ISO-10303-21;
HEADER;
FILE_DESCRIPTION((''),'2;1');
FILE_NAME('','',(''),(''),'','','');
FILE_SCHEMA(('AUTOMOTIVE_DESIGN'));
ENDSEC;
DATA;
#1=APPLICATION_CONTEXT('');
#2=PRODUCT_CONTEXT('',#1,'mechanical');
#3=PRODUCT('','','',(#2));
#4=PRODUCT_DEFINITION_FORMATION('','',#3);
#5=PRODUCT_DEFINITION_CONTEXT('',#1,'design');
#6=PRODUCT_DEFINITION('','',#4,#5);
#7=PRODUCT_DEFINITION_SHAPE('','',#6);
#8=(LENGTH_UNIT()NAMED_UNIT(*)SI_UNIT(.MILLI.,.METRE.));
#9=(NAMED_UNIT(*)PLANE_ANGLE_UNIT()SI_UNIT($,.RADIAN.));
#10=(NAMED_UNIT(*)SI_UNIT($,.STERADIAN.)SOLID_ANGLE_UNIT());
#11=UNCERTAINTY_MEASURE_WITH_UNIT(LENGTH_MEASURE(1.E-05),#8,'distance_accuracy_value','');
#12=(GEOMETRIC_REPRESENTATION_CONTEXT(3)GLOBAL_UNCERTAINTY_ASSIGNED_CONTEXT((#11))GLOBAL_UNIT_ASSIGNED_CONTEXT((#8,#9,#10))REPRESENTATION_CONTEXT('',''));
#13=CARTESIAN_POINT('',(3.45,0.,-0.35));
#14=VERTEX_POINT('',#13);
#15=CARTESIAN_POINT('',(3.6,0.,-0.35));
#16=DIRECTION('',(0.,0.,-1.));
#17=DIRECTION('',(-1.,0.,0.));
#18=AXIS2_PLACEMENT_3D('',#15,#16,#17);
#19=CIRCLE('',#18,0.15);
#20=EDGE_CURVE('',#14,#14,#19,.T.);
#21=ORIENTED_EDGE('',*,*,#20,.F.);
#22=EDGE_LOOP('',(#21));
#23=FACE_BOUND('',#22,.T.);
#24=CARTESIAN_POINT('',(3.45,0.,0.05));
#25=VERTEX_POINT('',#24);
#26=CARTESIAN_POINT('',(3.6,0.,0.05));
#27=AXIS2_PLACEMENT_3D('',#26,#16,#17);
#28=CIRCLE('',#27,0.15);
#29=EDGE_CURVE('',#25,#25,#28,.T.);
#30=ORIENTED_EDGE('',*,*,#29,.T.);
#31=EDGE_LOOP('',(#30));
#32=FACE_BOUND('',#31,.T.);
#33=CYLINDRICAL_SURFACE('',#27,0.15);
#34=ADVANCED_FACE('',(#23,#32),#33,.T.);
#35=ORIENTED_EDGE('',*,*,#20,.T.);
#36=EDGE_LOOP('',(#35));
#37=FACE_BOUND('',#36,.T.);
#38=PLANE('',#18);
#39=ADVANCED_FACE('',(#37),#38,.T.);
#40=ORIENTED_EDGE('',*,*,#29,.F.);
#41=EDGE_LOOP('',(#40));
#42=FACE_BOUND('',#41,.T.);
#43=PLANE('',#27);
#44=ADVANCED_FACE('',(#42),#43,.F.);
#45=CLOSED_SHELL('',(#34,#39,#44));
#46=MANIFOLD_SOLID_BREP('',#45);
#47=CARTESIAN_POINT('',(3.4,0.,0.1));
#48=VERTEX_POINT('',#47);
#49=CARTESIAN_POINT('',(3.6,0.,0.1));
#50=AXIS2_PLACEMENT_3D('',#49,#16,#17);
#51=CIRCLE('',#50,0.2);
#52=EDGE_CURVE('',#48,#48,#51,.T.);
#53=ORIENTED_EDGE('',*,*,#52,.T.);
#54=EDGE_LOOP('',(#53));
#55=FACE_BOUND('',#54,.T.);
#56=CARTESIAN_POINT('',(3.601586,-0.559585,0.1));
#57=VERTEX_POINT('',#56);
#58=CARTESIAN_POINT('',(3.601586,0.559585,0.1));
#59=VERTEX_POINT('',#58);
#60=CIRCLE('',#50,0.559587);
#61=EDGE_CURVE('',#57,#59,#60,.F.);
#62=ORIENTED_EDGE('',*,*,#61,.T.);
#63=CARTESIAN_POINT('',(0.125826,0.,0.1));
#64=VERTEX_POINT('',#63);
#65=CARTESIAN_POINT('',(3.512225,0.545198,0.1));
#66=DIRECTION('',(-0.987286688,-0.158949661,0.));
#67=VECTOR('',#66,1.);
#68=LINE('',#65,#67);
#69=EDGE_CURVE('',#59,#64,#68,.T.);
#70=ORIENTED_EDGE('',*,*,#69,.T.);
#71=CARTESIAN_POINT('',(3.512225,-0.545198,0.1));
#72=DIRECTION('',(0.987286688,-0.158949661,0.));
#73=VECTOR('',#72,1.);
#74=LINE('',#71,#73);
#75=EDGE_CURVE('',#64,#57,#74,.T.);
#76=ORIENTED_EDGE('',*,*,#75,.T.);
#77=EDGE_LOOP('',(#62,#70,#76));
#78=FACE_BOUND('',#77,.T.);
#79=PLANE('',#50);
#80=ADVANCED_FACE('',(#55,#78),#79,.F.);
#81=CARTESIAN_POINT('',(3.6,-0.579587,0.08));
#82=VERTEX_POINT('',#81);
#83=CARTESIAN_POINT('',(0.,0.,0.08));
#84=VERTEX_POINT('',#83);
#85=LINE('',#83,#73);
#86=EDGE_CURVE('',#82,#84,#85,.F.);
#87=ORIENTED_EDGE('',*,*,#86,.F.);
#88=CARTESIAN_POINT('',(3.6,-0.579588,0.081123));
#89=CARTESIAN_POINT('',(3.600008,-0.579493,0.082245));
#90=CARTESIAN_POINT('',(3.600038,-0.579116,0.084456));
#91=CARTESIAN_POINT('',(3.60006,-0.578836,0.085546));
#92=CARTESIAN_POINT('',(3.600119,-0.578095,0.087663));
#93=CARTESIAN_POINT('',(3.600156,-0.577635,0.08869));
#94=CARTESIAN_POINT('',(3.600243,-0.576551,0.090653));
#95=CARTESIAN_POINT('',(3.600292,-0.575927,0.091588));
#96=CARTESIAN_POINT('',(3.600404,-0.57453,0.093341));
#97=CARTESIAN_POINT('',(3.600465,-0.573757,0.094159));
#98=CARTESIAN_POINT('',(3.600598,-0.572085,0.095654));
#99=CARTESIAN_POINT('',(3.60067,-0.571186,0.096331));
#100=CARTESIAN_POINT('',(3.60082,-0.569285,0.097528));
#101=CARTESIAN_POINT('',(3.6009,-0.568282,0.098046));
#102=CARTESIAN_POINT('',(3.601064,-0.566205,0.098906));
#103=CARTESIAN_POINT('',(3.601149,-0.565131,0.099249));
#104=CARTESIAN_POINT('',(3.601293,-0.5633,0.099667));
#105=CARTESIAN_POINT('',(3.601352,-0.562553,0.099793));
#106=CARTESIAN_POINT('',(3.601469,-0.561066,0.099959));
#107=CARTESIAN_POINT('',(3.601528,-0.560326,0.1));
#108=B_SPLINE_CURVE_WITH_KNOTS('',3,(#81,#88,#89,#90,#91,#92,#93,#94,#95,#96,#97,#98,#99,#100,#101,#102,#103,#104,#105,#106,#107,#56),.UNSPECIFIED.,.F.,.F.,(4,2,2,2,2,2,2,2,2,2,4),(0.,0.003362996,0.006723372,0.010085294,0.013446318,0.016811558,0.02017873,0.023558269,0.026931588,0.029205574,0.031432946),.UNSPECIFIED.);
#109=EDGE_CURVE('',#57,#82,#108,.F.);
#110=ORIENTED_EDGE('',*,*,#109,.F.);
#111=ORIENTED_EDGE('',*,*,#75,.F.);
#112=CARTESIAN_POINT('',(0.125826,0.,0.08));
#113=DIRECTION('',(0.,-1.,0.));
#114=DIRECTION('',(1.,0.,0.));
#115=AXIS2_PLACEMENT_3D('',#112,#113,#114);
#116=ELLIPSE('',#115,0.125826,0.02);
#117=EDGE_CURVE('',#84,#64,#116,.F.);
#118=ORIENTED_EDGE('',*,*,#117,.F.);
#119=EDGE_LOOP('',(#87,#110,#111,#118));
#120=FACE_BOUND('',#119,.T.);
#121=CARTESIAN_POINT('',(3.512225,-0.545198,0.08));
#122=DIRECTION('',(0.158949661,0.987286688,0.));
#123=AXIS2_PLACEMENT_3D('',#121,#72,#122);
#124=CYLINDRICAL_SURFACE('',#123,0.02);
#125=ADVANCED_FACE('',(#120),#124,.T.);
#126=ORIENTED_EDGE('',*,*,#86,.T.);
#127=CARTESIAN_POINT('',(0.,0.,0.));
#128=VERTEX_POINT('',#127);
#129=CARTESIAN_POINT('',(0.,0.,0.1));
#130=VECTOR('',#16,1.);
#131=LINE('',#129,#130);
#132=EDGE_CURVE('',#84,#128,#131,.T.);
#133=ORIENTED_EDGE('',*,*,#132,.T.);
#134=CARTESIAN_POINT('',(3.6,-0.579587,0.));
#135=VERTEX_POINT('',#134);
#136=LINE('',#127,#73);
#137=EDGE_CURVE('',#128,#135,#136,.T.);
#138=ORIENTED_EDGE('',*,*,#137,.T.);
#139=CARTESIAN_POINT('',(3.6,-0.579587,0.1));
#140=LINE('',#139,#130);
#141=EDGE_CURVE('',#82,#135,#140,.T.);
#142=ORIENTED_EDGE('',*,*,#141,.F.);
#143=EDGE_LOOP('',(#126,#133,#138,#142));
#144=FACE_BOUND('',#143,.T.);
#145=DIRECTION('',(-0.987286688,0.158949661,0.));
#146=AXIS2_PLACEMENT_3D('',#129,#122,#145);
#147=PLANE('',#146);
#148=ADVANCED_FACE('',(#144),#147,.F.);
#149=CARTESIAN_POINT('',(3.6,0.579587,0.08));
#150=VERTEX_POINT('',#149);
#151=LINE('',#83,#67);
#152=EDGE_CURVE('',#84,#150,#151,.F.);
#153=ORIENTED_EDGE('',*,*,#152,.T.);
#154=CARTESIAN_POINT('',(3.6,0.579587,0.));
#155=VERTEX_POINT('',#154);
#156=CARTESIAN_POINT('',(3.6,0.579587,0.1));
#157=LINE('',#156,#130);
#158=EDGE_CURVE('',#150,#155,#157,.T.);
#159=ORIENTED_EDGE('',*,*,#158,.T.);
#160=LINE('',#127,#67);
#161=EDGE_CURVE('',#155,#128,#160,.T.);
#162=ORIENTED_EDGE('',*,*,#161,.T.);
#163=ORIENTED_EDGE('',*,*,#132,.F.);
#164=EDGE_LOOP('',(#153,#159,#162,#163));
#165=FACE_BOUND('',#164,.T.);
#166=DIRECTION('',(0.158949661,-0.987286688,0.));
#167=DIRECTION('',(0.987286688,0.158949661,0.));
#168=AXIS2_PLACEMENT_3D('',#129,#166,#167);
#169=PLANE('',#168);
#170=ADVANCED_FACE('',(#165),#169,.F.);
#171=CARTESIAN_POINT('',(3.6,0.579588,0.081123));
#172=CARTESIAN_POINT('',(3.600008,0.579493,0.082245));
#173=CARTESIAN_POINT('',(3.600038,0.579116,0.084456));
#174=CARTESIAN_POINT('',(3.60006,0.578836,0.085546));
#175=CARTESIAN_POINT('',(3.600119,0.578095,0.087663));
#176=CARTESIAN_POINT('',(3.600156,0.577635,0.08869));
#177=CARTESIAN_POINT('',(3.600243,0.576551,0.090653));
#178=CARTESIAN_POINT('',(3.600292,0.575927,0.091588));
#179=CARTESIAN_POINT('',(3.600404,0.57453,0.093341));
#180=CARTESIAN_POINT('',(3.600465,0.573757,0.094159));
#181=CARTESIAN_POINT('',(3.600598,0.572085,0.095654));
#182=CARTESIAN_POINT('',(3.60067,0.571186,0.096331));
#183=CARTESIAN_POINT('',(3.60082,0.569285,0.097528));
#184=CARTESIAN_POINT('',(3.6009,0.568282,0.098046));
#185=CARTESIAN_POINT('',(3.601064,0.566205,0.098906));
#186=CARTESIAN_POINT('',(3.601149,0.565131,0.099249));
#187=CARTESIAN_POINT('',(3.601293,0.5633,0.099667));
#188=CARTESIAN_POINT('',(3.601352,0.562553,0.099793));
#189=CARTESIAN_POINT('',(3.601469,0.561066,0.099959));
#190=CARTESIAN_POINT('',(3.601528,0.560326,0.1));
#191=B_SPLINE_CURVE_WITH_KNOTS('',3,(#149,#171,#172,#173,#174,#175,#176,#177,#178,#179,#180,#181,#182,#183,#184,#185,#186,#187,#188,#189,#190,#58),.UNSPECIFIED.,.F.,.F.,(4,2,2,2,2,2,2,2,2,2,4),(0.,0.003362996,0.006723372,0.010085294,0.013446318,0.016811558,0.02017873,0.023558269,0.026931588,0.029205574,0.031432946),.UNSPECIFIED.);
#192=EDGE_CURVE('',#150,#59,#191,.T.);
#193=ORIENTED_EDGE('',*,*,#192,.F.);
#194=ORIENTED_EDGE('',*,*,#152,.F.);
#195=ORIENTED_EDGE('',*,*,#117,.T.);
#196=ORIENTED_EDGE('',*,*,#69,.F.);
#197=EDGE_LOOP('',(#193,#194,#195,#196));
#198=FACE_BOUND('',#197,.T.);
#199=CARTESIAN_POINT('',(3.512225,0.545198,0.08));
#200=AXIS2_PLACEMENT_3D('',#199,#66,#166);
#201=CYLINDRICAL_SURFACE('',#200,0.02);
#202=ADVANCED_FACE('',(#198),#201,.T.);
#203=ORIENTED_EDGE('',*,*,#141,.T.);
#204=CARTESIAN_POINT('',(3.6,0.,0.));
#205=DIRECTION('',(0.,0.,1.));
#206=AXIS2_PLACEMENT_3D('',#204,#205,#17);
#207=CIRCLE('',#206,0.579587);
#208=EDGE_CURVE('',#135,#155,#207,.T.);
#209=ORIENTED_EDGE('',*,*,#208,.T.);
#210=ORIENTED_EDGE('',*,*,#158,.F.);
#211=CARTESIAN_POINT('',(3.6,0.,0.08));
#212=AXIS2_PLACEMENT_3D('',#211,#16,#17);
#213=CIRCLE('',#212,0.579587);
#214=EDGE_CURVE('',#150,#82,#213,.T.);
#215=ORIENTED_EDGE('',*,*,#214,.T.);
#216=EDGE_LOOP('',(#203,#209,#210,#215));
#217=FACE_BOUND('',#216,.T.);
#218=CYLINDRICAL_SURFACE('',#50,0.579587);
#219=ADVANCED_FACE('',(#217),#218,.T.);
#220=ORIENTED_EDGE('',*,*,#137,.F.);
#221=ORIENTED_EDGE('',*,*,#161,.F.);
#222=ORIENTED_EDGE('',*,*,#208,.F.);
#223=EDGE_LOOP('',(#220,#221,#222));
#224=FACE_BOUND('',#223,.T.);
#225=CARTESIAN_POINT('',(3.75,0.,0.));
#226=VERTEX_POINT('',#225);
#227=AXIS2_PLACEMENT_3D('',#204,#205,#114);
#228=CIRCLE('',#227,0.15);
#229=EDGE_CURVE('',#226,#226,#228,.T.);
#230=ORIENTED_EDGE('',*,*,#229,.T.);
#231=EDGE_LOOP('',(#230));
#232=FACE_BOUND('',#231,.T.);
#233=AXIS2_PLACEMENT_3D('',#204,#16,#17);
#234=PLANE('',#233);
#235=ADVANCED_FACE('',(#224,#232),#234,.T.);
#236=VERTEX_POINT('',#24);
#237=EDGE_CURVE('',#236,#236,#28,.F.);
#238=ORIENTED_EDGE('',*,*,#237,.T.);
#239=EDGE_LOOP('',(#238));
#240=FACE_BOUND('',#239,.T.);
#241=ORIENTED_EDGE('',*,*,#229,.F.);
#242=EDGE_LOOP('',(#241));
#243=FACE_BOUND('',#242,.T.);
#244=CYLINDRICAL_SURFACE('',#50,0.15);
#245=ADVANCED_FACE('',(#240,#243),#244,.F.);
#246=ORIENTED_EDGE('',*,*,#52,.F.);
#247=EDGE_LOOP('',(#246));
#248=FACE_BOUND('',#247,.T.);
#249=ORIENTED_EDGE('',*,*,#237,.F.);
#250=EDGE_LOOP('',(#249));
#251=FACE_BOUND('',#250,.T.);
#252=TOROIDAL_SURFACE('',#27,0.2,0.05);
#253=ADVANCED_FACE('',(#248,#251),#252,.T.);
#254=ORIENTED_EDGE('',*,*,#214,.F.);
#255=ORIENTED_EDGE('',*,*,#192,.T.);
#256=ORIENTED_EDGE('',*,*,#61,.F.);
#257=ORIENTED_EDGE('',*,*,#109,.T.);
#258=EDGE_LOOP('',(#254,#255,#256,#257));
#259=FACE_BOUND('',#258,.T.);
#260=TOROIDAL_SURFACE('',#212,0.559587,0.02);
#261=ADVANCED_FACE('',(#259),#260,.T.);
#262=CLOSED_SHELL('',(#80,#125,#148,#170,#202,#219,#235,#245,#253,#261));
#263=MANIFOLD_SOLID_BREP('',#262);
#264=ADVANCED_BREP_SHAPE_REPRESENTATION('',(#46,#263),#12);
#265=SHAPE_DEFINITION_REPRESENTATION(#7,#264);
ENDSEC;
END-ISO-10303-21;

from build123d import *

# Parameters (mm, degrees)
SKETCH_1_R           = 0.15
EXTRUDE_1_DEPTH      = 0.1
EXTRUDE_2_DEPTH      = 0.35
EXTRUDE_2_DEPTH_BACK = 0.05
SKETCH_2_R           = 0.15
FILLET_1_R           = 0.05
FILLET_2_R           = 0.02


with BuildPart() as part:
    # Эскиз1 → Бобышка-Вытянуть1 (new body)
    with BuildSketch(Plane.XY):
        with BuildLine():
            Line((0, 0), (3.6, 0.579587254))
            ThreePointArc((3.6, 0.579587254), (4.179587254, 0), (3.6, -0.579587254))
            Line((3.6, -0.579587254), (0, 0))
        make_face()
        with Locations((3.6, 0)):
            Circle(SKETCH_1_R, mode=Mode.SUBTRACT)
    extrude(amount=EXTRUDE_1_DEPTH)

    # Скругление1
    fillet_1_edges = [part.edges().sort_by_distance(p)[0] for p in [
        (3.45, 0, 0.1),
    ]]
    fillet(fillet_1_edges, radius=FILLET_1_R)

    # Скругление2
    fillet_2_edges = [part.edges().sort_by_distance(p)[0] for p in [
        (4.179587254, 0, 0.1),
        (1.8, 0.289793627, 0.1),
        (1.8, -0.289793627, 0.1),
    ]]
    fillet(fillet_2_edges, radius=FILLET_2_R)


with BuildPart() as body_2:
    # Эскиз2 → Бобышка-Вытянуть2 (new, two sides: drawn at the far end of the back side and taken through both)
    with BuildSketch(Plane(origin=(0, 0, 0), x_dir=(-1, 0, 0), z_dir=(0, 0, -1)).offset(-EXTRUDE_2_DEPTH_BACK)):
        with Locations((-3.6, 0)):
            Circle(SKETCH_2_R)
    extrude(amount=EXTRUDE_2_DEPTH + EXTRUDE_2_DEPTH_BACK)


solid = Compound([part.part, body_2.part])
